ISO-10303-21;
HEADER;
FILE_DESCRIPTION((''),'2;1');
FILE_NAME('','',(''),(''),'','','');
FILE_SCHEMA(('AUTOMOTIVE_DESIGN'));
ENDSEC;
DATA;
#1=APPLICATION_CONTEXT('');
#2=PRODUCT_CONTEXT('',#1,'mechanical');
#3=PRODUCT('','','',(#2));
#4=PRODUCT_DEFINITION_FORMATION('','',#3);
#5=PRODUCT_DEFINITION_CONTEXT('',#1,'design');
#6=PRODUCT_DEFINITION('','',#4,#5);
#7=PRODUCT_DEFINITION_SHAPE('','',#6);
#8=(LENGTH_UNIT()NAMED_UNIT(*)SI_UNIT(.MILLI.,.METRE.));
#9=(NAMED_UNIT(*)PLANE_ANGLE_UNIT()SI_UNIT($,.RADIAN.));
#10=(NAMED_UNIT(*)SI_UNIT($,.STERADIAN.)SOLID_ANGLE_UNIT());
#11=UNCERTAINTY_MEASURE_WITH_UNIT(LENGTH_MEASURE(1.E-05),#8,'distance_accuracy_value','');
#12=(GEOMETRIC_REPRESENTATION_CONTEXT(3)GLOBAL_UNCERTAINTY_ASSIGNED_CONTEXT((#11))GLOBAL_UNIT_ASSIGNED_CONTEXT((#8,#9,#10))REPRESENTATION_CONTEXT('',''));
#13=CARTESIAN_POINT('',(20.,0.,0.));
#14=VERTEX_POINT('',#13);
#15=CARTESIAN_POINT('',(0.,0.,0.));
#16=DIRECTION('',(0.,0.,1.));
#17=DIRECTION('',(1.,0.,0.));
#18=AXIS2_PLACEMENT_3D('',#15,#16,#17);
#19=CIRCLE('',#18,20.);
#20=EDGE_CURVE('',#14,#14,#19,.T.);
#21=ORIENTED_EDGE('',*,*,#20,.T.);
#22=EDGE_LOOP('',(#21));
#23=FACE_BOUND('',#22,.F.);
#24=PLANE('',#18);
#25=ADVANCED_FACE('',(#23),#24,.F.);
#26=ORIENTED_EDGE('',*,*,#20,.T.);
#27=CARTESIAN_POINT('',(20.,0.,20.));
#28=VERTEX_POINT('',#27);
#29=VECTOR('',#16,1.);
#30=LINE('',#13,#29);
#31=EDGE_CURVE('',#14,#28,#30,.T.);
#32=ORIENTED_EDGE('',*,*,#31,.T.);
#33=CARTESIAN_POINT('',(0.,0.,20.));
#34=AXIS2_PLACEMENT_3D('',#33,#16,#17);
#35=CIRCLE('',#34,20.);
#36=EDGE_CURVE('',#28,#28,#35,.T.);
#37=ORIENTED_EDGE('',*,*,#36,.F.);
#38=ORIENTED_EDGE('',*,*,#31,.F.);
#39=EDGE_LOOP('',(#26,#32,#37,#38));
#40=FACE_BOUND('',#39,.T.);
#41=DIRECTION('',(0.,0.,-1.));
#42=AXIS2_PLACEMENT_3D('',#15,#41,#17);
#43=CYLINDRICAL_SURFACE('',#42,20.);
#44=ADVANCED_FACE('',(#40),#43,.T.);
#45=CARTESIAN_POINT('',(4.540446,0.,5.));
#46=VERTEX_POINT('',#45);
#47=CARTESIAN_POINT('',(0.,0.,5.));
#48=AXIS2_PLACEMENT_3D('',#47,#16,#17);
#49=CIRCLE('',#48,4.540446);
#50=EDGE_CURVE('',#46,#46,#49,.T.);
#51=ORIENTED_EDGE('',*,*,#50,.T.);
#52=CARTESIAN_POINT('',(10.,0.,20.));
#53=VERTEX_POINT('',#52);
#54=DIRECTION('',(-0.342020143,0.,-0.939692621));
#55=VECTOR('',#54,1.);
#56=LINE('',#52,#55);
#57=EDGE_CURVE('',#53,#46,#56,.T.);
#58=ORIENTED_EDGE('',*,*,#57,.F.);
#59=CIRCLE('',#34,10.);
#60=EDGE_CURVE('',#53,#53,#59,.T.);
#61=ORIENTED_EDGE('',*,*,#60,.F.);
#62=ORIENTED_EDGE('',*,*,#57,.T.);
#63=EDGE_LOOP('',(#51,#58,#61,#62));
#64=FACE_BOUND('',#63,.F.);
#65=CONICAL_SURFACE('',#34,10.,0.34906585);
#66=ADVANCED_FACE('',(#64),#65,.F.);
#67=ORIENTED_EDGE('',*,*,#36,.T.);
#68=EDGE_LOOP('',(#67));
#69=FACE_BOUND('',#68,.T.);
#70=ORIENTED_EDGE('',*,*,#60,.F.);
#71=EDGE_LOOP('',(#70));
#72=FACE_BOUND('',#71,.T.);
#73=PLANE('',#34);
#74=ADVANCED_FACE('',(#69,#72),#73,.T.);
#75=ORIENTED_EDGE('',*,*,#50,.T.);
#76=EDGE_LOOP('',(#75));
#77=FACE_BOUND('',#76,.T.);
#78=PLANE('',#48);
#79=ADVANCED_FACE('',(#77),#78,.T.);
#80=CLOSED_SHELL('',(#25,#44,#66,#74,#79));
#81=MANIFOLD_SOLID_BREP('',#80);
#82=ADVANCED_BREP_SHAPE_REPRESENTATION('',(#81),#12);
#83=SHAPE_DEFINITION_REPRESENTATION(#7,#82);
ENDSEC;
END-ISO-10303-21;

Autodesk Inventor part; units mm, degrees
ref_plane "YZ Plane" through (0, 0, 0) normal (1, 0, 0) x (0, 1, 0)
ref_plane "XZ Plane" through (0, 0, 0) normal (0, 1, 0) x (-1, 0, 0)
ref_plane "XY Plane" through (0, 0, 0) normal (0, 0, 1) x (1, 0, 0)
sketch "Sketch1" plane through (0, 0, 0) normal (0, 0, 1) x (1, 0, 0)
  circle A0 centre (0, 0) radius 20
  dimension "d0" = 40
extrude "Extrusion1" add sketch "Sketch1" along normal blind 20
sketch "Sketch2" plane through (0, 0, 20) normal (0, 0, 1) x (1, 0, 0)
  circle A0 centre (0, 0) radius 10
  dimension "d3" = 20
extrude "Extrusion2" cut sketch "Sketch2" against normal blind 15 draft -20
properties part number "LID_Product_1"
